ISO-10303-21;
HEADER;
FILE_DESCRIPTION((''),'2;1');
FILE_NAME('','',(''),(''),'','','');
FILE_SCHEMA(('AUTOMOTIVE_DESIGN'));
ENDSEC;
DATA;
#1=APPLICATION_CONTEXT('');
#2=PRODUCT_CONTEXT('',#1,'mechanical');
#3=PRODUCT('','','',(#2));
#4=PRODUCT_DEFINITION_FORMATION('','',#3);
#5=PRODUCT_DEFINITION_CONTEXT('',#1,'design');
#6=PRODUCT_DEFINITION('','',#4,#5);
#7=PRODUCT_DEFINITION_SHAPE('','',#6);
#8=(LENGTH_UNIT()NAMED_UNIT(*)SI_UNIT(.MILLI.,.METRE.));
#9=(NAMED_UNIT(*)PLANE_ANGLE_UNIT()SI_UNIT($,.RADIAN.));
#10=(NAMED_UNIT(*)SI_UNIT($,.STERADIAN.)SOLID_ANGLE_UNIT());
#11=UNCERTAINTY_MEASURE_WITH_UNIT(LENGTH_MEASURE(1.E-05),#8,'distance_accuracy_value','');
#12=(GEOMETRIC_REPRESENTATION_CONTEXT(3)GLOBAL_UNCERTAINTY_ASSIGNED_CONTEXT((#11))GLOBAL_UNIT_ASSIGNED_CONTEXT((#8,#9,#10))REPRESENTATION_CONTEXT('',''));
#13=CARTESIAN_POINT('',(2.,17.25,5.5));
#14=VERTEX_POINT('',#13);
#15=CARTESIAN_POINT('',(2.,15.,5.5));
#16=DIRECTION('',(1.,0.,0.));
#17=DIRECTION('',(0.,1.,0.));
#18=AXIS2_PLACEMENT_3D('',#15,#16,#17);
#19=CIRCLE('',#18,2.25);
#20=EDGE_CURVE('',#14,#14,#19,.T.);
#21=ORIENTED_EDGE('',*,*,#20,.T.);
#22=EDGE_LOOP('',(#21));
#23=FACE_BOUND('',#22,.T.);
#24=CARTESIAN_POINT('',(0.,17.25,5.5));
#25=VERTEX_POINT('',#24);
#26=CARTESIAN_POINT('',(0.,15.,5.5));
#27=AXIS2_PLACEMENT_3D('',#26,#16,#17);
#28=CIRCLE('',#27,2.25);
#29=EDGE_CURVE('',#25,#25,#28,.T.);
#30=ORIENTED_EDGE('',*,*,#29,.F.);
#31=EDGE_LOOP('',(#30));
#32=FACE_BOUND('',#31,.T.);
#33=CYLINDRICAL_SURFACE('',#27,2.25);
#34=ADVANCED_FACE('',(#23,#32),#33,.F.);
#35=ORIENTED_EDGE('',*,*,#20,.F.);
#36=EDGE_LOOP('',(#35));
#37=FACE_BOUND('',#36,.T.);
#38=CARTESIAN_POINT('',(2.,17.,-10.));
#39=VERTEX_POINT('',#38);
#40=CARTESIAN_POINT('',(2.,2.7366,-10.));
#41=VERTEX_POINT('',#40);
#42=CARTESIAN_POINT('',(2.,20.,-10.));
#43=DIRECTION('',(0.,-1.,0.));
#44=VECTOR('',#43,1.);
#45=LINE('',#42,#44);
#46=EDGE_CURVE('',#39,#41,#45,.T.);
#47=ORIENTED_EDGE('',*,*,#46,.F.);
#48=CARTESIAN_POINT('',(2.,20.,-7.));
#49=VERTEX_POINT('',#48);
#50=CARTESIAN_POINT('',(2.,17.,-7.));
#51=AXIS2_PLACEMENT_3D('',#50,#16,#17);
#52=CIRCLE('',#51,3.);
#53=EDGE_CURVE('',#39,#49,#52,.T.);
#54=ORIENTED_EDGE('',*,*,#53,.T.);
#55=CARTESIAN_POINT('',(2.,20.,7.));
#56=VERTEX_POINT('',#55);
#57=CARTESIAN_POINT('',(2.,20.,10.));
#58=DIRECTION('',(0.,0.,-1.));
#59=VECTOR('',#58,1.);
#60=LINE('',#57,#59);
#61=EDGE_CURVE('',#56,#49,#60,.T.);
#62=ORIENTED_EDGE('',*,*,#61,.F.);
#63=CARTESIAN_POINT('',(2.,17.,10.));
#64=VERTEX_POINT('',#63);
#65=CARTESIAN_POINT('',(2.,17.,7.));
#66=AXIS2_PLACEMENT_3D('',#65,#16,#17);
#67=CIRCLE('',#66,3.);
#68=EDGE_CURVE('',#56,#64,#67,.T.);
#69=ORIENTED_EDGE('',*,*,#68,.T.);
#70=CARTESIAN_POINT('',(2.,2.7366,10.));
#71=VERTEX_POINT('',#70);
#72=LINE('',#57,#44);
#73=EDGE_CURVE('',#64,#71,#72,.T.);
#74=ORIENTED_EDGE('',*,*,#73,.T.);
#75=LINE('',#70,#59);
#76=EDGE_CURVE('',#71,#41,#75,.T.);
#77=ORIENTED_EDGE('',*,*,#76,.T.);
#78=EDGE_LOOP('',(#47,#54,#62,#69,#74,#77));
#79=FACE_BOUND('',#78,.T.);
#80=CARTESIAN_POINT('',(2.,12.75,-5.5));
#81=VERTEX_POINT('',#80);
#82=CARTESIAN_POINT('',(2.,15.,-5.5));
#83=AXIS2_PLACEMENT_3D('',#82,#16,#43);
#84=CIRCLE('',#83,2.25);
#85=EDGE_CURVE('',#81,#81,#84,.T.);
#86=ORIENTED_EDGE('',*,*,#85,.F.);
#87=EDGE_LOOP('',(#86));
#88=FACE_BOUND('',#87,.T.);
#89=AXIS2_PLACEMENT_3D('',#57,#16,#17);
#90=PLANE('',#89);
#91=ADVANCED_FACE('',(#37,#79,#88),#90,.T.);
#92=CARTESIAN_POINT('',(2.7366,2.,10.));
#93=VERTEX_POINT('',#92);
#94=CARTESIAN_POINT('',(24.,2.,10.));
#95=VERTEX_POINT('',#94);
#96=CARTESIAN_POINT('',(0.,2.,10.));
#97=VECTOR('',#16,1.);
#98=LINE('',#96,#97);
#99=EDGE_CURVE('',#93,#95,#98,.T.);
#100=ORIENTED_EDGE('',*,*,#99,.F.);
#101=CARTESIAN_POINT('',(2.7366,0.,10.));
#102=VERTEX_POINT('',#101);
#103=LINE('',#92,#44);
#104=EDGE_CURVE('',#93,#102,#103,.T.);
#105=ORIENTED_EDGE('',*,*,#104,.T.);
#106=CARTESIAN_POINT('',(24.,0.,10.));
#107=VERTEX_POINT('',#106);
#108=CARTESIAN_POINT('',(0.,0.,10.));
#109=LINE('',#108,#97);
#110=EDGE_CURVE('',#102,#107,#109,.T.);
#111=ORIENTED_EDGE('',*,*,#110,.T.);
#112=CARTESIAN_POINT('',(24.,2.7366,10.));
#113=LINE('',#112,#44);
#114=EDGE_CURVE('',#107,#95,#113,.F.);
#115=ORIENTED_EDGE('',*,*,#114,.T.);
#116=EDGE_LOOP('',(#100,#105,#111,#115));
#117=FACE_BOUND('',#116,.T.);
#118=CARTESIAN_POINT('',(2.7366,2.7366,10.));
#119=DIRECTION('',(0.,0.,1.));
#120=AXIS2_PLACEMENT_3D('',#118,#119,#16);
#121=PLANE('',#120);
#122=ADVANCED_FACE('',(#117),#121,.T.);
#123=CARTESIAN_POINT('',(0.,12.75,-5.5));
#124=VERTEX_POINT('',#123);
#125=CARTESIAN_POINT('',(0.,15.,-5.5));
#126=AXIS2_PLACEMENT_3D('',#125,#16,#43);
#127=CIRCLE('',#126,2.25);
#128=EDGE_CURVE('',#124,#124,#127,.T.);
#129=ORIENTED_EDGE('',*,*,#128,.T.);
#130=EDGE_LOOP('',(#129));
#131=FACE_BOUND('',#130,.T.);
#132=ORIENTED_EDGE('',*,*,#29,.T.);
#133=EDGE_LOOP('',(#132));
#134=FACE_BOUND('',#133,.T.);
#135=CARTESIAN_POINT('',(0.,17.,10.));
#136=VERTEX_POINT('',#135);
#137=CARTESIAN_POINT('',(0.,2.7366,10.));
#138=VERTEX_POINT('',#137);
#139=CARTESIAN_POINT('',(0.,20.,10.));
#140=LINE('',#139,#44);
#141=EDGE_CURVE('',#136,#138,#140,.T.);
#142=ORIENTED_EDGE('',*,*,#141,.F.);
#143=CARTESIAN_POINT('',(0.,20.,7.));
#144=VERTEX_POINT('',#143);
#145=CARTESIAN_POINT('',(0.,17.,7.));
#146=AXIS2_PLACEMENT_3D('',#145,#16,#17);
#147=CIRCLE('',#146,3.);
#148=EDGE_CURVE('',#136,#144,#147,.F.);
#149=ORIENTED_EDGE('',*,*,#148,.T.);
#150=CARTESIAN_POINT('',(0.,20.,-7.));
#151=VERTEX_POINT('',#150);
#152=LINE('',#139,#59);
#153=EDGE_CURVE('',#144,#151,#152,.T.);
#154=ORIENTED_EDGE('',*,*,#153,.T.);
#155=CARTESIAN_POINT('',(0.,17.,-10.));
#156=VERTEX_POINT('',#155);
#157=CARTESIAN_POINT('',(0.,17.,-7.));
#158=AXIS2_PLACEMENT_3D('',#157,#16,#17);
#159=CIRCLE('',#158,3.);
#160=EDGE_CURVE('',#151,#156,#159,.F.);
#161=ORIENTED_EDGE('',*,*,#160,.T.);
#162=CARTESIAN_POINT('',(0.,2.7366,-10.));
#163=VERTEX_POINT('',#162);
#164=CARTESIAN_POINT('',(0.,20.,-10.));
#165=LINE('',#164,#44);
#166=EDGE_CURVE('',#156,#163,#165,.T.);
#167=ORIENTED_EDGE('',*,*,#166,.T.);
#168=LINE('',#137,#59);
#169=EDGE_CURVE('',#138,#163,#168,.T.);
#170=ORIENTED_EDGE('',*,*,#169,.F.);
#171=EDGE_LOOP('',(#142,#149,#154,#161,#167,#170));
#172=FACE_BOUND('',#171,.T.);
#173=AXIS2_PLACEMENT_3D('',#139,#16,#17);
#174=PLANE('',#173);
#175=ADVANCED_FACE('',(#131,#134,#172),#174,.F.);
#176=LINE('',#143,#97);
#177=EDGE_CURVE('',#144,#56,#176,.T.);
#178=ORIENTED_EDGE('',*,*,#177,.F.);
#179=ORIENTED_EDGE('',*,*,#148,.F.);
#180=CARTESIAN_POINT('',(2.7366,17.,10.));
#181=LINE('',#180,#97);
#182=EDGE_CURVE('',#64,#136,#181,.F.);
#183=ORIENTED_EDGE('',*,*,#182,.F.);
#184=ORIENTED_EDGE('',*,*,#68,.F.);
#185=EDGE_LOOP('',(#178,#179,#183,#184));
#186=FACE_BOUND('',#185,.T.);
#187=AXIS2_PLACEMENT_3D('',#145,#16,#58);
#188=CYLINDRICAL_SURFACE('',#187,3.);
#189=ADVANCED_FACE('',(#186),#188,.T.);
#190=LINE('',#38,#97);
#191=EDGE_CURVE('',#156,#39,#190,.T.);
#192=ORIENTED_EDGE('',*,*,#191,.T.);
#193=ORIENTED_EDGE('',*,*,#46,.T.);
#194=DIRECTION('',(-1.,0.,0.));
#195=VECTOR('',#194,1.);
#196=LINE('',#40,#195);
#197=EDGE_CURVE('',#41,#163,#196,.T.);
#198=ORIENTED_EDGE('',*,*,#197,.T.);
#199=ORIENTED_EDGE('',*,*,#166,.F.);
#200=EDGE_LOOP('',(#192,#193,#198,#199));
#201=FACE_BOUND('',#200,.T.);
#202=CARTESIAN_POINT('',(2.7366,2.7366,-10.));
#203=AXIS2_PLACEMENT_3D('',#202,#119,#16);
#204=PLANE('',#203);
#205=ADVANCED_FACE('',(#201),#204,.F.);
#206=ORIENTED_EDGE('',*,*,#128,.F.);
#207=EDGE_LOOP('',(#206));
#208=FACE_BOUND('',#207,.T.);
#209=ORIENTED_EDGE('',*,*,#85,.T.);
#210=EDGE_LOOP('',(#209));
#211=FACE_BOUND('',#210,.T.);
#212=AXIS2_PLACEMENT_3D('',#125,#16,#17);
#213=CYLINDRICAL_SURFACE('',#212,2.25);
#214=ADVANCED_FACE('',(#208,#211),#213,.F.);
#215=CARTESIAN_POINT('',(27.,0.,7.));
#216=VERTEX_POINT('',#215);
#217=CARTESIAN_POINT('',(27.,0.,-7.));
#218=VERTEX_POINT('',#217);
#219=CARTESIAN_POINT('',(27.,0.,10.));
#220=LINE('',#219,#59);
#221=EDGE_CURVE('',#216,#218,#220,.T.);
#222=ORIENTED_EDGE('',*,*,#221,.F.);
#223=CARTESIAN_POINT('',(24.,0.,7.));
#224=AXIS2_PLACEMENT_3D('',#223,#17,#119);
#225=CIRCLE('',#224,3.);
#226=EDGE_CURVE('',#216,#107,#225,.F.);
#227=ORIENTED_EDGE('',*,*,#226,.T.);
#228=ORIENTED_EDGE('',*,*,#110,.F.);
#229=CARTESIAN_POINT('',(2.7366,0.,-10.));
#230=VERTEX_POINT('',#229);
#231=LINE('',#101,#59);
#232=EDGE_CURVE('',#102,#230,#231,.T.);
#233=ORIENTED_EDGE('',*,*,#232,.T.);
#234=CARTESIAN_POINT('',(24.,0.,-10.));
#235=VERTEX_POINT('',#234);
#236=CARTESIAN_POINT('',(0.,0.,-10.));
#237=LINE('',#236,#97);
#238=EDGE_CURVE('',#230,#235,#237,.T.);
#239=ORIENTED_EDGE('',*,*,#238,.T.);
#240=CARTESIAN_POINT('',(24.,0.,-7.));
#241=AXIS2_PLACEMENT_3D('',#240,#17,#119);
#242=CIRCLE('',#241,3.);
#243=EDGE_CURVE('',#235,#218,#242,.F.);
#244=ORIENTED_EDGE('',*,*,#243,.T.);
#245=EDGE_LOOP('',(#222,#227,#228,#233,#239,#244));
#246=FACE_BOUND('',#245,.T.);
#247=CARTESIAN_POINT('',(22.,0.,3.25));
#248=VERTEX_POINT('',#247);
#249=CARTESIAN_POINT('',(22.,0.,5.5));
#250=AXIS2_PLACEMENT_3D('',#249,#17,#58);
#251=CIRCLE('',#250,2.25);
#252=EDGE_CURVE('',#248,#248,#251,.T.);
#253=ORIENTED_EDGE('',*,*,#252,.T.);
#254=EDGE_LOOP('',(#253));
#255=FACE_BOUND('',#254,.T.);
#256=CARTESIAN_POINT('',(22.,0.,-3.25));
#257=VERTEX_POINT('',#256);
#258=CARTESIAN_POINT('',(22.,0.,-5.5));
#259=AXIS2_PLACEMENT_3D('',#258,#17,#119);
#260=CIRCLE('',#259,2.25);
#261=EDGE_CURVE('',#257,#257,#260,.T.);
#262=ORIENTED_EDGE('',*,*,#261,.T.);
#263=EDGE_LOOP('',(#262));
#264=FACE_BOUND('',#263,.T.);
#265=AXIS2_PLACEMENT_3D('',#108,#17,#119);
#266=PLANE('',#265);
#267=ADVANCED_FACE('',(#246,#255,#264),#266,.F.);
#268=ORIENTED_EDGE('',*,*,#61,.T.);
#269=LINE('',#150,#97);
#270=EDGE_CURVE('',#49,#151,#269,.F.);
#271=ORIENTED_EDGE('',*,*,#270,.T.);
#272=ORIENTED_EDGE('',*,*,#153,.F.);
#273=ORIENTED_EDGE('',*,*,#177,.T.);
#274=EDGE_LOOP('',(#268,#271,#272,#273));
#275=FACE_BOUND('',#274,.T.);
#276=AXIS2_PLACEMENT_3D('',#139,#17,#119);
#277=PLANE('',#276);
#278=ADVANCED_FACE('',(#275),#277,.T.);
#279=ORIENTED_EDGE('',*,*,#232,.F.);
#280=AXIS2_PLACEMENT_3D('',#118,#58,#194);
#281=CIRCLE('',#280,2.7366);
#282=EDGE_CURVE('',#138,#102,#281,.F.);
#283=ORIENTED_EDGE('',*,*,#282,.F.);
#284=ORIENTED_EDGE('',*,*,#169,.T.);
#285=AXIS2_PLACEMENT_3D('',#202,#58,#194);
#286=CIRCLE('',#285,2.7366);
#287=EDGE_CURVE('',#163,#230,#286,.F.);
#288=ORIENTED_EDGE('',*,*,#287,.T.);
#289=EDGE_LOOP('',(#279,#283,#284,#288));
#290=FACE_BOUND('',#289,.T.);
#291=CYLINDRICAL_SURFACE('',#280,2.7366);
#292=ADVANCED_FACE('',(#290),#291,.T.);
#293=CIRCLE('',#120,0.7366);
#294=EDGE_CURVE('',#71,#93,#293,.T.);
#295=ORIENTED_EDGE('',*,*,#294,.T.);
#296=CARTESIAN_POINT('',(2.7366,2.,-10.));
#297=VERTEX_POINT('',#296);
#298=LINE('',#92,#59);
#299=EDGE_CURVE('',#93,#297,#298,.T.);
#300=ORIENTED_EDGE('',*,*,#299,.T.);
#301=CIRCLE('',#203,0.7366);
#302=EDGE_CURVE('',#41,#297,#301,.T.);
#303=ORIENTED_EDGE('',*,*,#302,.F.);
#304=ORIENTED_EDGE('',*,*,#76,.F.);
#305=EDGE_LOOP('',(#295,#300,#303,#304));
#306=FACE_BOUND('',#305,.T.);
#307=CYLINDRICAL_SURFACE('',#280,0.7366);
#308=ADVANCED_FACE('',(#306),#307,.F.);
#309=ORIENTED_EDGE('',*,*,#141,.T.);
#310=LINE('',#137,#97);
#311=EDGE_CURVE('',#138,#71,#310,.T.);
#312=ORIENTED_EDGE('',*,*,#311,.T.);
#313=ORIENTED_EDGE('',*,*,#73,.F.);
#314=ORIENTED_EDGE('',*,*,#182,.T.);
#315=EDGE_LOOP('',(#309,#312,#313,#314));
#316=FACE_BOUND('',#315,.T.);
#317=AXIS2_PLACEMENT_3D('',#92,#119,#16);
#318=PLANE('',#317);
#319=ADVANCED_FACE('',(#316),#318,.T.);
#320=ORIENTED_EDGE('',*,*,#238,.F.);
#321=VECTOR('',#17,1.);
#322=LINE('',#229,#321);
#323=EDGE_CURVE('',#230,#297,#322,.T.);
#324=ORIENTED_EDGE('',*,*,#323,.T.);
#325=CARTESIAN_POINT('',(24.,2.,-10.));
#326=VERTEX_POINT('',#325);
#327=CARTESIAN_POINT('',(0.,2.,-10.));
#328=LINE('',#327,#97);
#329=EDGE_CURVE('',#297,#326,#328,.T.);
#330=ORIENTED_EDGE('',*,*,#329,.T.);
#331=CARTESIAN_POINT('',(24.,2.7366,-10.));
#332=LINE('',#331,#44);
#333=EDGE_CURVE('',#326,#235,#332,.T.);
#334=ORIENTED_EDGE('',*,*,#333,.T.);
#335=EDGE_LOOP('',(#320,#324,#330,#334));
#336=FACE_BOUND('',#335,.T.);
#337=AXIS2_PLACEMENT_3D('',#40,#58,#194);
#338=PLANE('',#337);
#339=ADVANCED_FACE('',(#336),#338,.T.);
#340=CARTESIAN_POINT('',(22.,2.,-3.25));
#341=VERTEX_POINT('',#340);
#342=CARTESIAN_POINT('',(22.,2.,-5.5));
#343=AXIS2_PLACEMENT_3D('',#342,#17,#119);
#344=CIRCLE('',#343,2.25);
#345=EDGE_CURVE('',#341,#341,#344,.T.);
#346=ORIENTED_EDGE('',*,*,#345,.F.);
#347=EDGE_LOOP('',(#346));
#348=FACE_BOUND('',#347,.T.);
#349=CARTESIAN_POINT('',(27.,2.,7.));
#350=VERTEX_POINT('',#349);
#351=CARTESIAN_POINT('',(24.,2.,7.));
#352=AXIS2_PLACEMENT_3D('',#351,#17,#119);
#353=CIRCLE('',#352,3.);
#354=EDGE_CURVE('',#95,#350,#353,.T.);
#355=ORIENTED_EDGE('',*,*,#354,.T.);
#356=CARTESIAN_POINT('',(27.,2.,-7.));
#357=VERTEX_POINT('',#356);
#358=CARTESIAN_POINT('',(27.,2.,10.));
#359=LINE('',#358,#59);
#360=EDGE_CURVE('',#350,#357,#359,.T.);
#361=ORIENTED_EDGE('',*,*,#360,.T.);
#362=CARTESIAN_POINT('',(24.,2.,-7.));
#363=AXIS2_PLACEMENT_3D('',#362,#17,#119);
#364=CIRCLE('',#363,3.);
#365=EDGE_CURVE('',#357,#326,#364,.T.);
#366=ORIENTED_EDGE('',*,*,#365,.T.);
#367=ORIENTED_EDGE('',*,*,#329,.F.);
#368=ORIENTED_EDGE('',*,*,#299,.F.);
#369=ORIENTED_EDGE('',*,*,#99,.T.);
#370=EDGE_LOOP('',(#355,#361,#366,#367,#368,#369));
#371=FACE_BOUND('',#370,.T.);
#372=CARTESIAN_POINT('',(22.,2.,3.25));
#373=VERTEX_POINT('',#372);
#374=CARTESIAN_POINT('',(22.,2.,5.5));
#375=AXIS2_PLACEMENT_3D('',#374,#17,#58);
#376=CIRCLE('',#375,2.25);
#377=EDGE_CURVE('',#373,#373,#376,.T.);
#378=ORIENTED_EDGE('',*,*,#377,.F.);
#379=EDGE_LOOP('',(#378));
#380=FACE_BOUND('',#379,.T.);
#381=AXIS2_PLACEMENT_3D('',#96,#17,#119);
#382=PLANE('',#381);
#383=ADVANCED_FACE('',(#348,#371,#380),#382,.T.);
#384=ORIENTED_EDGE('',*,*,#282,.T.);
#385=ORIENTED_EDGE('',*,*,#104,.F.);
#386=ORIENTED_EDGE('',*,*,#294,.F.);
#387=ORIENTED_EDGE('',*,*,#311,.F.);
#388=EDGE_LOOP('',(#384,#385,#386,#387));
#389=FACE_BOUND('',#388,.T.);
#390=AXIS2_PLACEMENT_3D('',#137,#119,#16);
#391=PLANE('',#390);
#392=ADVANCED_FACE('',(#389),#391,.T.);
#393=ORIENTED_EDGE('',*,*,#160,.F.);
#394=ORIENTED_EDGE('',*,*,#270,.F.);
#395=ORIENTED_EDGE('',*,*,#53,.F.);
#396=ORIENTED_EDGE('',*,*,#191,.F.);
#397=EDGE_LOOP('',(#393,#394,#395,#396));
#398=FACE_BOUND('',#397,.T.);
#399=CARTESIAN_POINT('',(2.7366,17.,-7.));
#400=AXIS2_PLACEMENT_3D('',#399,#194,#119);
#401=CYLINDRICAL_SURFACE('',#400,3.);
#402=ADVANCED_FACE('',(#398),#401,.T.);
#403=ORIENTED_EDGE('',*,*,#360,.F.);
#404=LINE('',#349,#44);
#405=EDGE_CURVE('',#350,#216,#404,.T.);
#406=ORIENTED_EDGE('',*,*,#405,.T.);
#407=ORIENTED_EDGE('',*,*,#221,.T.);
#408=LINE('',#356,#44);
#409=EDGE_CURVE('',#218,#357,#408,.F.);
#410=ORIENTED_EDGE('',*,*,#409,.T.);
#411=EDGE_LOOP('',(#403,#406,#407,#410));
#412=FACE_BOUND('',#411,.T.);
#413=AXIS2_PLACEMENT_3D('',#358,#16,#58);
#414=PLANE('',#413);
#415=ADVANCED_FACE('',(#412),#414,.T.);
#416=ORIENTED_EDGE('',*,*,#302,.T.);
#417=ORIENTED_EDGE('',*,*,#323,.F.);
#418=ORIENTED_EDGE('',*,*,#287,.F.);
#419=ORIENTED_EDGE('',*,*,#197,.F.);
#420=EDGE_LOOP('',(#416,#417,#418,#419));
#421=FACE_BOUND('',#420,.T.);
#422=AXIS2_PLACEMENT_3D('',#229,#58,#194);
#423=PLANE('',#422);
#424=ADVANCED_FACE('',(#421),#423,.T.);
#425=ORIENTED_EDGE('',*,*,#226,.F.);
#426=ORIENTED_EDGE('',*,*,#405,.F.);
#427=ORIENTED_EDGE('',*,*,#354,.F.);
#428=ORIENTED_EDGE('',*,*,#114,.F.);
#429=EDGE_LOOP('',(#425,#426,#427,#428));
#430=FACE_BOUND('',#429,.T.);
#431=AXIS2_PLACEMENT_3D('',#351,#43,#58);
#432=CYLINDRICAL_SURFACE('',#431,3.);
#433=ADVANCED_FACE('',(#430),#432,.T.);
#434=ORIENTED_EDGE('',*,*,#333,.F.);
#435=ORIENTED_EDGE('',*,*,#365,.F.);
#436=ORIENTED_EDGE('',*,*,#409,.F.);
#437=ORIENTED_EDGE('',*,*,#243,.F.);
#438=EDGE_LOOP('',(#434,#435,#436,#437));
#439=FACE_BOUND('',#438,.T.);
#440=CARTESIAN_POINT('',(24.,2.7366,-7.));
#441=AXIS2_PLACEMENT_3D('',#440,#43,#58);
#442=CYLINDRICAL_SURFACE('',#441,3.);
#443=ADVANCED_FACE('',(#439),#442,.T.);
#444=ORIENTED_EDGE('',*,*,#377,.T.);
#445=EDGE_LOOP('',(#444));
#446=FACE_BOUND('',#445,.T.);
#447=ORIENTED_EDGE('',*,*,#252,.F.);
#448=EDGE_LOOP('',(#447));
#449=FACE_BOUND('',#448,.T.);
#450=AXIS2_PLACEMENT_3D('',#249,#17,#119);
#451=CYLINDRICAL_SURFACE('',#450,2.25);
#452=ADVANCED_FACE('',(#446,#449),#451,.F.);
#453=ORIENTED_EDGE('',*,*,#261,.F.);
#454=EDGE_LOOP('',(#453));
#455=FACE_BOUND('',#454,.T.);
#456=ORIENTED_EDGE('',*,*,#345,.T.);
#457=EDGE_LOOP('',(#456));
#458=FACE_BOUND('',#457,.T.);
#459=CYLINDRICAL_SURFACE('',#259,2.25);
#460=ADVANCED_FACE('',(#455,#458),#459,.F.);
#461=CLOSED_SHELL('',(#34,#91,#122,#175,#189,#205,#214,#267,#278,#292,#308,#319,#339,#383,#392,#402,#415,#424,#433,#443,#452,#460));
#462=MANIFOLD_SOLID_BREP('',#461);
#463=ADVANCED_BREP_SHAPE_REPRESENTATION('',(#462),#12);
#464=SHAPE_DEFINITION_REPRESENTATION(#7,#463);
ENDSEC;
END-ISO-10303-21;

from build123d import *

# Parameters (mm, degrees)
SM_BASE_FLANGE_1_DEPTH = 10
SKETCH_3_R             = 2.25
CUT_EXTRUDE_1_DEPTH    = 34.541019662
SKETCH_4_R             = 2.25
CUT_EXTRUDE_2_DEPTH    = 34.955853693
FILLET_1_R             = 3


# Sheet-metal steps are written as plain solids
with BuildPart() as part:
    # Sketch 1 → 基体-法兰1 (new, symmetric)
    with BuildSketch(Plane.XY):
        with BuildLine():
            Line((0, 20), (0, 2.7366))
            ThreePointArc((0, 2.7366), (0.801531583, 0.801531583), (2.7366, 0))
            Line((2.7366, 0), (27, 0))
            Line((27, 0), (27, 2))
            Line((27, 2), (2.7366, 2))
            ThreePointArc((2.7366, 2), (2.215745145, 2.215745145), (2, 2.7366))
            Line((2, 2.7366), (2, 20))
            Line((2, 20), (0, 20))
        make_face()
    extrude(amount=SM_BASE_FLANGE_1_DEPTH, both=True)

    # 草图3 → 切除-拉伸1 (cut, through all)
    with BuildSketch(Plane(origin=(2, 0, 0), x_dir=(0, 0, -1), z_dir=(1, 0, 0))):
        with Locations(Location((-5.5, 15, 0), (0, 0, 90))):
            Circle(SKETCH_3_R)
        with Locations(Location((5.5, 15, 0), (0, 0, 270))):
            Circle(SKETCH_3_R)
    extrude(amount=-CUT_EXTRUDE_1_DEPTH, mode=Mode.SUBTRACT)

    # 草图4 → 切除-拉伸2 (cut, through all)
    with BuildSketch(Plane(origin=(0, 2, 0), x_dir=(1, 0, 0), z_dir=(0, 1, 0))):
        with Locations(Location((22, 5.5, 0), (0, 0, 270))):
            Circle(SKETCH_4_R)
        with Locations(Location((22, -5.5, 0), (0, 0, 90))):
            Circle(SKETCH_4_R)
    extrude(amount=-CUT_EXTRUDE_2_DEPTH, mode=Mode.SUBTRACT)

    # 圆角1
    fillet_1_edges = [part.edges().sort_by_distance(p)[0] for p in [
        (1, 20, 10),
        (27, 1, 10),
        (1, 20, -10),
        (27, 1, -10),
    ]]
    fillet(fillet_1_edges, radius=FILLET_1_R)


solid = part.part
